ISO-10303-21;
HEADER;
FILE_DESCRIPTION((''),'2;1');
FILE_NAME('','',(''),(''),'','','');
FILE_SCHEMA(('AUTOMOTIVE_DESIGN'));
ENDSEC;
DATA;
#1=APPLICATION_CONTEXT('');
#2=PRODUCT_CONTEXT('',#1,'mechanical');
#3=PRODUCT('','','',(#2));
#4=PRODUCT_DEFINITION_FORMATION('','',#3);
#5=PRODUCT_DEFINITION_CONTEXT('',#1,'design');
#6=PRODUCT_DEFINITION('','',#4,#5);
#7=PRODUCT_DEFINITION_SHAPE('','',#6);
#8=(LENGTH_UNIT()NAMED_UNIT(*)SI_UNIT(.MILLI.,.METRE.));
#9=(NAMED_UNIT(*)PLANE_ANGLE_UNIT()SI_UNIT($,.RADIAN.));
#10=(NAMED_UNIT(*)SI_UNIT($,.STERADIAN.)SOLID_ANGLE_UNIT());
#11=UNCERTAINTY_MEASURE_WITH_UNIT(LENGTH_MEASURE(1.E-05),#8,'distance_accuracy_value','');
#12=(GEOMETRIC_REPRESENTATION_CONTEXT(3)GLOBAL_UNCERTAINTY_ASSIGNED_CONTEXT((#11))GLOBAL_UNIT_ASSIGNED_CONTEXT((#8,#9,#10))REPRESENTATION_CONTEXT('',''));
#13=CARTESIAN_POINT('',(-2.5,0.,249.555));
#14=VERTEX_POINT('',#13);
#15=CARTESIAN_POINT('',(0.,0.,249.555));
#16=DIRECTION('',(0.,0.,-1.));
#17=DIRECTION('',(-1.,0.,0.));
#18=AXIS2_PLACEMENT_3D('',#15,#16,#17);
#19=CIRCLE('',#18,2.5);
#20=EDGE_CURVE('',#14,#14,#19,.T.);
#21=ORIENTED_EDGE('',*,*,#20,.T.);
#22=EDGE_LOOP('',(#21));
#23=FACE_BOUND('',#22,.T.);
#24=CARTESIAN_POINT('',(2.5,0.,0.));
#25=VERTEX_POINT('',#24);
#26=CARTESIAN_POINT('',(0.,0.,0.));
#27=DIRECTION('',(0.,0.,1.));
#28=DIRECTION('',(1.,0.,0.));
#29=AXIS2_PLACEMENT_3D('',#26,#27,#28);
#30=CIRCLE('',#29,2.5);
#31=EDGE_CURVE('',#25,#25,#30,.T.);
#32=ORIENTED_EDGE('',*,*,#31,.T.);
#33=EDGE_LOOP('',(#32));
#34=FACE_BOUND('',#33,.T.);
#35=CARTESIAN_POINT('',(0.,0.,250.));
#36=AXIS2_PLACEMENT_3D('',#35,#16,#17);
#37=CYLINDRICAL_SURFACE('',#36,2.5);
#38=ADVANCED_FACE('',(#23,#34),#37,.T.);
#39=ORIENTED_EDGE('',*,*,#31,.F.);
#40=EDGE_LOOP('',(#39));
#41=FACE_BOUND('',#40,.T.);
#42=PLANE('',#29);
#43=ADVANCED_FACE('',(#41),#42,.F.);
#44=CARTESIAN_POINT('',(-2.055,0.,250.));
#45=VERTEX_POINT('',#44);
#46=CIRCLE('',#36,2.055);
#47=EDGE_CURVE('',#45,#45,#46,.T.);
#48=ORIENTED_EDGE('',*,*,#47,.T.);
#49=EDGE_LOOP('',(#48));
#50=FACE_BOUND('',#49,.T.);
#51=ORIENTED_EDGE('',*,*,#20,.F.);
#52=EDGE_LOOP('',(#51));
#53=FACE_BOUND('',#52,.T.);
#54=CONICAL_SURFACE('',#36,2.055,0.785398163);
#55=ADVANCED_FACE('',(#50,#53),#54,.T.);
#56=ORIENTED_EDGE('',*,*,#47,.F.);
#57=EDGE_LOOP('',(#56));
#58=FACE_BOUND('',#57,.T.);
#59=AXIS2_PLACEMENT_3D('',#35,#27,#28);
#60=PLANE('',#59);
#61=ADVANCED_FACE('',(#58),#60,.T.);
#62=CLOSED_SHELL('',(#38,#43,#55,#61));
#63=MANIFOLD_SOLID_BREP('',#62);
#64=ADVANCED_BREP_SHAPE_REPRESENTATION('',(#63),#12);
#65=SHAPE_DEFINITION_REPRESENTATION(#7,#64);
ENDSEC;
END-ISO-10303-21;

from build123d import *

# Parameters (mm, degrees)
SKETCH1_R           = 2.5
BOSS_EXTRUDE1_DEPTH = 250


# Read off the part's stored shape, not the designer's step: M5 Roscas Standard Taladro1
with BuildPart() as part:
    # Sketch1 → Boss-Extrude1 (new body)
    with BuildSketch(Plane.XY):
        Circle(SKETCH1_R)
    extrude(amount=BOSS_EXTRUDE1_DEPTH)

    # M5 Roscas Standard Taladro1 outline → M5 Roscas Standard Taladro1 (revolve, cut)
    with BuildSketch(Plane.XZ):
        Polygon((2.5, 250), (2.055, 250), (2.5, 249.555), align=None)
    revolve(axis=Axis((0, 0, 0), (0, 0, 1)), mode=Mode.SUBTRACT)


solid = part.part
